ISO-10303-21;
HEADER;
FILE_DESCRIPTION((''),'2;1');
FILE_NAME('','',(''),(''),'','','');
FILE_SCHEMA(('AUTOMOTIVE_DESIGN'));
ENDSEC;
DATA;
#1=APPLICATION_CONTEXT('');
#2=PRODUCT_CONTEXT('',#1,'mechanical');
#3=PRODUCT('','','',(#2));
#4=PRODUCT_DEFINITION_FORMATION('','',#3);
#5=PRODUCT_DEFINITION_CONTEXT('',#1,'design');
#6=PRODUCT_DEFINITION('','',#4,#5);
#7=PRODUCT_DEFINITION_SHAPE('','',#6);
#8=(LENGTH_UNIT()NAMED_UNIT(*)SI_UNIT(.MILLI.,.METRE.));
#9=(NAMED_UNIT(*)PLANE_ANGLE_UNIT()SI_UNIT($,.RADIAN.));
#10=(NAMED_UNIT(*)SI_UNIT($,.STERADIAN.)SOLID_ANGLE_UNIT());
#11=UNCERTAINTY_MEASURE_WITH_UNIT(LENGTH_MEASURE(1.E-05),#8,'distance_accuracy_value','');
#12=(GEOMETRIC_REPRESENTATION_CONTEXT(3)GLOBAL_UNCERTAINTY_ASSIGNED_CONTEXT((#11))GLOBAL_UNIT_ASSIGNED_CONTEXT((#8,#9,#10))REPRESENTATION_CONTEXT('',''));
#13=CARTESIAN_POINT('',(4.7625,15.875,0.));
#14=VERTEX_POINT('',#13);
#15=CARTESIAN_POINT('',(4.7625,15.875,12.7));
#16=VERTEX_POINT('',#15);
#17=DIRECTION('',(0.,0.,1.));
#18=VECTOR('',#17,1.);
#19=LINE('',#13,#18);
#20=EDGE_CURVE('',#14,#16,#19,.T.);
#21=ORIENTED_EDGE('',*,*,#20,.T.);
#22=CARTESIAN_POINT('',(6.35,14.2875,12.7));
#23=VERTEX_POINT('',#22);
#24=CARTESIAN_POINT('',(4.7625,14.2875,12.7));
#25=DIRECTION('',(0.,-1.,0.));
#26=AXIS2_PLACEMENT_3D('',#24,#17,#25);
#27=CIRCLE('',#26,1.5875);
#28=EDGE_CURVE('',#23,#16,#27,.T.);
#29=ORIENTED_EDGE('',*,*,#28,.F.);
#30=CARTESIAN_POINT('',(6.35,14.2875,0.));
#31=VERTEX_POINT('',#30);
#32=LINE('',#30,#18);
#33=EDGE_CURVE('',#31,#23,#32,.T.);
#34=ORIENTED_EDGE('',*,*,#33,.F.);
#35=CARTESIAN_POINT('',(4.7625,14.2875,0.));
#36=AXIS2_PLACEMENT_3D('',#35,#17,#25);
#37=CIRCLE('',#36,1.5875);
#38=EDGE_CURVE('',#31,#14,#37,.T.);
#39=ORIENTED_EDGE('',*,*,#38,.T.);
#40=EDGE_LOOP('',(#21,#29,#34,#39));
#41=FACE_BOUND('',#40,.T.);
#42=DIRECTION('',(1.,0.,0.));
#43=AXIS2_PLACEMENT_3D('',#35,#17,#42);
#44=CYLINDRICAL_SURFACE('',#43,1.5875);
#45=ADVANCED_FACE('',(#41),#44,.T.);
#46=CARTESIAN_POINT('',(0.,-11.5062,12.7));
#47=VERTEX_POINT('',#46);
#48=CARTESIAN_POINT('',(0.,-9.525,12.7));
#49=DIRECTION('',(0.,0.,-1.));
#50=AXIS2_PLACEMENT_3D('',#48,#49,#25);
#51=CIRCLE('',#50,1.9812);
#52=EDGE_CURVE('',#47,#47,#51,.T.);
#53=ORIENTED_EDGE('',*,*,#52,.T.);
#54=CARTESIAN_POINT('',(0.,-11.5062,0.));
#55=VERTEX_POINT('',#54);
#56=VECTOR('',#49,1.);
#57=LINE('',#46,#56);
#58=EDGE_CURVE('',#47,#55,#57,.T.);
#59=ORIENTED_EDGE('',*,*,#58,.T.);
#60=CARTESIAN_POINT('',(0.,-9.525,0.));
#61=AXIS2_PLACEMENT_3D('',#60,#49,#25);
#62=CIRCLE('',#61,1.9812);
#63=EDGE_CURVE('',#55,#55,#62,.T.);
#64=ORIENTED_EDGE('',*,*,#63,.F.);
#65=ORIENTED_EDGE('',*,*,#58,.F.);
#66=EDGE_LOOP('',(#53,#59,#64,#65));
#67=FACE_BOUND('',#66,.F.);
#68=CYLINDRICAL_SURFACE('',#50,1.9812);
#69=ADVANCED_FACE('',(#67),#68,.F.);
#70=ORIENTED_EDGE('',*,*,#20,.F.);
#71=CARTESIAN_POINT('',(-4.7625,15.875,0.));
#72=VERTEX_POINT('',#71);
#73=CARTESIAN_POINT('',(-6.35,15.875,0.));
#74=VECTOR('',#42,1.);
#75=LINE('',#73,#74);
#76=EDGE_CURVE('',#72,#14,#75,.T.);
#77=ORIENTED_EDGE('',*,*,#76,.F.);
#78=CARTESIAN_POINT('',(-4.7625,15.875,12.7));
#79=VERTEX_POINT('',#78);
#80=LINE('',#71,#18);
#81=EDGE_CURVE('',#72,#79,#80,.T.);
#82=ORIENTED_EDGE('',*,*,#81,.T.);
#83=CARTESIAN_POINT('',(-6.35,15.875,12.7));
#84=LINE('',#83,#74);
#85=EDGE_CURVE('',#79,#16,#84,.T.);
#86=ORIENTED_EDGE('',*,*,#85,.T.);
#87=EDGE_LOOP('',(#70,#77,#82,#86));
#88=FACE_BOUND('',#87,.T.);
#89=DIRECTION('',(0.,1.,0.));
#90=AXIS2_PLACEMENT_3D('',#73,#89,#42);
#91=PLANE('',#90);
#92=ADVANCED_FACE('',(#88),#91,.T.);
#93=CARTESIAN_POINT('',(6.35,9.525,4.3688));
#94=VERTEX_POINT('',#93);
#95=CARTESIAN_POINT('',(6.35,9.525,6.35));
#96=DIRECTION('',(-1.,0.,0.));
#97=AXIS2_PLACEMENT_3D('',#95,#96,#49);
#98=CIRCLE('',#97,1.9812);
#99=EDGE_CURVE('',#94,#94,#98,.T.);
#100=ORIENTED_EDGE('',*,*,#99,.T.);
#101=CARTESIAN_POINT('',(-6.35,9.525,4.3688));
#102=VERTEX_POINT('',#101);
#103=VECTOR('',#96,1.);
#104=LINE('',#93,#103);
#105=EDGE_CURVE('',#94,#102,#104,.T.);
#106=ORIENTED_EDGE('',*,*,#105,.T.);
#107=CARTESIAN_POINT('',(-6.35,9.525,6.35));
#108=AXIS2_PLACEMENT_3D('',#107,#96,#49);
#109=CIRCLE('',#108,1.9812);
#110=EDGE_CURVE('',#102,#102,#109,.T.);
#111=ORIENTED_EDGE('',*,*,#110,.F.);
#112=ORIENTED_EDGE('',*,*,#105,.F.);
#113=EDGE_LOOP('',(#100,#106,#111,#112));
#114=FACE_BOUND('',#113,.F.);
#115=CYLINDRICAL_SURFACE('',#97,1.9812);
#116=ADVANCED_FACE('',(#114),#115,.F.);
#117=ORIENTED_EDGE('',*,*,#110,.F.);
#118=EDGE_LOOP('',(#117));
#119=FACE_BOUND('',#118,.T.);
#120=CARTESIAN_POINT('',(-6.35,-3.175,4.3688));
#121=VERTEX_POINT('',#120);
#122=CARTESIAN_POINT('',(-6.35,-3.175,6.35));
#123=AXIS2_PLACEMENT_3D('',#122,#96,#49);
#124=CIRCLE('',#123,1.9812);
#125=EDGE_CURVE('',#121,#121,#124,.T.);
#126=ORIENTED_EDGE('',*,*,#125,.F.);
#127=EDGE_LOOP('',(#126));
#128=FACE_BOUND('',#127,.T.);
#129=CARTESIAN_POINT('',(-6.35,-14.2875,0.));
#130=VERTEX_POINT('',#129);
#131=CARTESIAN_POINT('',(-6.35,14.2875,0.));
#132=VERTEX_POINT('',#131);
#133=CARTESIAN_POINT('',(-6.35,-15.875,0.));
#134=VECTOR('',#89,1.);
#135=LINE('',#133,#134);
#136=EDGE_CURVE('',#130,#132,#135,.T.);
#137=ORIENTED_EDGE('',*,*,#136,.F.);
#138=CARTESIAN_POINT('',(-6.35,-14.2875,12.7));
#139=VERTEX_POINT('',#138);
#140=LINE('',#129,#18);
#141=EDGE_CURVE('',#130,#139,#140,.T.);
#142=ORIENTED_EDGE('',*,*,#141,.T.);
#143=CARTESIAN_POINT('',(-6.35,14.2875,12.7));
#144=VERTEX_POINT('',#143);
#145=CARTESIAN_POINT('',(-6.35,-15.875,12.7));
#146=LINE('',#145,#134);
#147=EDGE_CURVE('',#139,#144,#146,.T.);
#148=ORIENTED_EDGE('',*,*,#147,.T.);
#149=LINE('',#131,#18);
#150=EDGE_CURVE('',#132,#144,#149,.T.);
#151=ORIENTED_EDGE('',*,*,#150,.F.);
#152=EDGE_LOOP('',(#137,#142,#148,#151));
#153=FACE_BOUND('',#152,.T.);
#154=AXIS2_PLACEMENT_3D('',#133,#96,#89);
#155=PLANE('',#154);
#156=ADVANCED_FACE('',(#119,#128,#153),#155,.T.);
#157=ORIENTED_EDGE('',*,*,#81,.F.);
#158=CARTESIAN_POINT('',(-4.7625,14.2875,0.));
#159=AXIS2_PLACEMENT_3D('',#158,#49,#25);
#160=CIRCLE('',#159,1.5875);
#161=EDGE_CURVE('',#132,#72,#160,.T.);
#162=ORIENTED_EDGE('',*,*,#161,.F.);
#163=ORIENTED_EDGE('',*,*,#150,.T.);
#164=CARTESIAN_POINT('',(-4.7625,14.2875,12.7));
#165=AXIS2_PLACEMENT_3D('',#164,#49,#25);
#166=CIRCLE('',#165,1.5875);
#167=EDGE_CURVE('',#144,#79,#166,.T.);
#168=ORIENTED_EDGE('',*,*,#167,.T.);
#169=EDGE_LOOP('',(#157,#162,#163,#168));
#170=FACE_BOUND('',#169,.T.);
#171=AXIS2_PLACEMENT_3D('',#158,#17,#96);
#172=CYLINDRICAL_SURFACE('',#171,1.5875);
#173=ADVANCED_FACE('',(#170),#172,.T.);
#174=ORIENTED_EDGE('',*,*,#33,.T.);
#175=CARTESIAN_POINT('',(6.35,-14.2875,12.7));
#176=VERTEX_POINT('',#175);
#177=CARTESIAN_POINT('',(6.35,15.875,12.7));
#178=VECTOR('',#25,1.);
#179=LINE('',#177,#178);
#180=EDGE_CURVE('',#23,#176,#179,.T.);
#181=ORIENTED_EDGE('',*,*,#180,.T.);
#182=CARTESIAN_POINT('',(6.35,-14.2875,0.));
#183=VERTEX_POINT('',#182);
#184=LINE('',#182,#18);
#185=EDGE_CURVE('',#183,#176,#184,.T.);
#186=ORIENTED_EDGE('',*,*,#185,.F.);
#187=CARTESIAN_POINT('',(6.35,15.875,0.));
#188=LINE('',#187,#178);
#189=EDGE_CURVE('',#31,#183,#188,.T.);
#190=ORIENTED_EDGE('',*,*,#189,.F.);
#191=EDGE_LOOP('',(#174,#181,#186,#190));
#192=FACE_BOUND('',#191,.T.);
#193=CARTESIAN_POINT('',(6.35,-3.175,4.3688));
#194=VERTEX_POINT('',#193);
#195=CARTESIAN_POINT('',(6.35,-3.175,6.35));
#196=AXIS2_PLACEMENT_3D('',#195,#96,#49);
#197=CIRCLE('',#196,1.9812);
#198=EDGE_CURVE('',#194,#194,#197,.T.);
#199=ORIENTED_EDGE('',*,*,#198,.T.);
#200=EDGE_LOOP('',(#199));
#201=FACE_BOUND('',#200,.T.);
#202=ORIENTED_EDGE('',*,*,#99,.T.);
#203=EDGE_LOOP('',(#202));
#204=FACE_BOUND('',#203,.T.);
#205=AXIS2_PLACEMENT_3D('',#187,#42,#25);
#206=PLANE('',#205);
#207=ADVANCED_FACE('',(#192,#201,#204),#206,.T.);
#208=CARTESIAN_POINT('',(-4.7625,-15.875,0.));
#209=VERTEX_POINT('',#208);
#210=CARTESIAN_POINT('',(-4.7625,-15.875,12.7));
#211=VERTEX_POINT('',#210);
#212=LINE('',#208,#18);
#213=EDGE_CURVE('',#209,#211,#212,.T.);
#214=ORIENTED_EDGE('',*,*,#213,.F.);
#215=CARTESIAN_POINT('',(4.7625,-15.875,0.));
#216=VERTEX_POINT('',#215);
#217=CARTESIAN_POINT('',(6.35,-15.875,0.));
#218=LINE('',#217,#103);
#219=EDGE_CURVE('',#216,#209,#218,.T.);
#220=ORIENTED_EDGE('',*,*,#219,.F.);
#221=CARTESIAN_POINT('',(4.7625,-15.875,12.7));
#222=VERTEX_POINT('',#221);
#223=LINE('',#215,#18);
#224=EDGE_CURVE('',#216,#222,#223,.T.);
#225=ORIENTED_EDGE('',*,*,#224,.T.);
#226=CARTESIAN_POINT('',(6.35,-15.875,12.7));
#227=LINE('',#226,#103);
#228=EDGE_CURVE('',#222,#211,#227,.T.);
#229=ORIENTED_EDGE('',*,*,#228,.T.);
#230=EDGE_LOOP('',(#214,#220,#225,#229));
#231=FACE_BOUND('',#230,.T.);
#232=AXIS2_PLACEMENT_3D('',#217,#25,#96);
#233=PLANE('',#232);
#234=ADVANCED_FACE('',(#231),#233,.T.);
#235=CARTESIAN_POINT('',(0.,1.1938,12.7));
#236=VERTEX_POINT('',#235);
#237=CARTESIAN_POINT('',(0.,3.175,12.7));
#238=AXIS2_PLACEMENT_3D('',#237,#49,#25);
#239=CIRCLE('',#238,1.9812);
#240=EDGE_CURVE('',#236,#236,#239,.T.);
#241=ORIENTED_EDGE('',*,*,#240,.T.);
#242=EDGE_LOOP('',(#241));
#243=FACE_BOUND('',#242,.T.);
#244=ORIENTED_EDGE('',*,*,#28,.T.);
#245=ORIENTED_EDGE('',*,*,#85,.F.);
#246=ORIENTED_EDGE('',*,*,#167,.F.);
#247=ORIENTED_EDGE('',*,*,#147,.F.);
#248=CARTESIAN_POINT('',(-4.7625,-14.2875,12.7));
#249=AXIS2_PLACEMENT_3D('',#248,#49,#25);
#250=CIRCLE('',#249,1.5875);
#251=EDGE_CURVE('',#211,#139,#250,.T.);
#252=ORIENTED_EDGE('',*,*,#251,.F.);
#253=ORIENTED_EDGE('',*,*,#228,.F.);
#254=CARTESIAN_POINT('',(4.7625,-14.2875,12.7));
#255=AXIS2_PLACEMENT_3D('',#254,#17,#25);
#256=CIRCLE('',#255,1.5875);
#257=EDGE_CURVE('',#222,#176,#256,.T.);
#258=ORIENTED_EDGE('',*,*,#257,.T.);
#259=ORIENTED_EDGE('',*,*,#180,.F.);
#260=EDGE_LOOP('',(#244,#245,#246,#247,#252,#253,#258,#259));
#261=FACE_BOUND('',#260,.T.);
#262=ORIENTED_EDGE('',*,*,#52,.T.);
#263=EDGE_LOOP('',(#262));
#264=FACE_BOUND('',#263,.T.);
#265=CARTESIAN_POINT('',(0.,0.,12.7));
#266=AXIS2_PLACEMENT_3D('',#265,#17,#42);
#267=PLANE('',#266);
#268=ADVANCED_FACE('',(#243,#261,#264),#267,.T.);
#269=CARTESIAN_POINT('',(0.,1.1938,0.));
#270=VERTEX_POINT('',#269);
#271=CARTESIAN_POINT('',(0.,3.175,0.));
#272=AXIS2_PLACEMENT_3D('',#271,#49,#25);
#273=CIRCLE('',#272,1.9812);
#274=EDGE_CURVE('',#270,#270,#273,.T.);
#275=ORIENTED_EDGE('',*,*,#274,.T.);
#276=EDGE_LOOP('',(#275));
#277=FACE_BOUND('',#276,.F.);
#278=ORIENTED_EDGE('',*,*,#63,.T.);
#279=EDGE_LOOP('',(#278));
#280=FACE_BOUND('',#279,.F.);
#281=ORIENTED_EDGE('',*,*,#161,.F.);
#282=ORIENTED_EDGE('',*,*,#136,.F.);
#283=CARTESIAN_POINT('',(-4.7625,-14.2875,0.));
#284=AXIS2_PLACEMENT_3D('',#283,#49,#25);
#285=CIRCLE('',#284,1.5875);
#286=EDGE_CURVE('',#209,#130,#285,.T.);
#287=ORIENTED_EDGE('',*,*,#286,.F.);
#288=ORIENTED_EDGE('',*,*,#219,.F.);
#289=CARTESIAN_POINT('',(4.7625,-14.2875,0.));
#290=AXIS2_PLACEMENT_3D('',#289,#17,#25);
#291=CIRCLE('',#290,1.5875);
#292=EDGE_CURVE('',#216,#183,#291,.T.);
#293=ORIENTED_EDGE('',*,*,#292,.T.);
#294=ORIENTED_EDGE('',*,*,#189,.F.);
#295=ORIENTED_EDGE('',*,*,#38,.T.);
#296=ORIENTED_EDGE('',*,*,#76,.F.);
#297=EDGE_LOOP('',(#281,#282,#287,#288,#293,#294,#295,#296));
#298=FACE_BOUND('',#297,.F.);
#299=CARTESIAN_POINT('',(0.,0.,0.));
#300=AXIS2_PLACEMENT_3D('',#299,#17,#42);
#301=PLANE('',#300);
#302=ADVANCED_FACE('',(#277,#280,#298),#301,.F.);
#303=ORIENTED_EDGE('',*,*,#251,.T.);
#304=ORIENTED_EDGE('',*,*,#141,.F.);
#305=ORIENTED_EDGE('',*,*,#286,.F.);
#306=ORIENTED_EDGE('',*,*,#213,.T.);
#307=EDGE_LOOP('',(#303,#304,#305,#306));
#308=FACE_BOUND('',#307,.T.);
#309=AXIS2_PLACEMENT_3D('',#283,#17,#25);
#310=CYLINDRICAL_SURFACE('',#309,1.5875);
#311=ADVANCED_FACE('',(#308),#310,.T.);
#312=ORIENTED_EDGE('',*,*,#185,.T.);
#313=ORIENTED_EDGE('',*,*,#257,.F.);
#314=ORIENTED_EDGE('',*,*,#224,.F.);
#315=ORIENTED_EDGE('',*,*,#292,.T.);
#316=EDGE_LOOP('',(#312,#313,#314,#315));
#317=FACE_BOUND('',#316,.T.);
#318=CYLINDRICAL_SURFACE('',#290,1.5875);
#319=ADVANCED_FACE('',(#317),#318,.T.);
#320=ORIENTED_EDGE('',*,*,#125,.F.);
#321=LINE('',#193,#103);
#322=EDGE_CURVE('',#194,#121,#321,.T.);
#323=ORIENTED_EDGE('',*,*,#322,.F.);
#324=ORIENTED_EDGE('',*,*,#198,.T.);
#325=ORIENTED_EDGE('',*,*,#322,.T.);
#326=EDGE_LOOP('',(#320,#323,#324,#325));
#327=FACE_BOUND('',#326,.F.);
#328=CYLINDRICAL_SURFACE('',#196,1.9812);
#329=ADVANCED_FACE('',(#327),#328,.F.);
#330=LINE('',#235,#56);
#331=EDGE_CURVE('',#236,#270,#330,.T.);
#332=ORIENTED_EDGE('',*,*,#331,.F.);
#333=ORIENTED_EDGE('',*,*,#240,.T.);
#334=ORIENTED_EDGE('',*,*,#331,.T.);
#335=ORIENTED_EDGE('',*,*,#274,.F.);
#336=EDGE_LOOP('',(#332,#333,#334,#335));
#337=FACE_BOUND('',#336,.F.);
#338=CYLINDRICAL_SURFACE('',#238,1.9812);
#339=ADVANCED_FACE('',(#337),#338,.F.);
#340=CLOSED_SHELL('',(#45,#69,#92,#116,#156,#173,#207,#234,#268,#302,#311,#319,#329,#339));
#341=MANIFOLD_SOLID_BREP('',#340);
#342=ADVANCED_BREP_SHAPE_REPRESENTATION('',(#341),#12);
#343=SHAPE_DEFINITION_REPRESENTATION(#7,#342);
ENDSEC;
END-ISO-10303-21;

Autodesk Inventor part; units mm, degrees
ref_plane "YZ Plane" through (0, 0, 0) normal (1, 0, 0) x (0, 1, 0)
ref_plane "XZ Plane" through (0, 0, 0) normal (0, 1, 0) x (-1, 0, 0)
ref_plane "XY Plane" through (0, 0, 0) normal (0, 0, 1) x (1, 0, 0)
sketch "Sketch1" plane through (0, 0, 0) normal (0, 0, 1) x (1, 0, 0)
  line L0 (6.35, -15.875) -> (-6.35, -15.875)
  line L1 (-6.35, -15.875) -> (-6.35, 15.875)
  line L2 (-6.35, 15.875) -> (6.35, 15.875)
  line L3 (6.35, 15.875) -> (6.35, -15.875)
  line L4 (6.35, -15.875) -> (-6.35, 15.875) construction
  line L5 (-6.35, -15.875) -> (6.35, 15.875) construction
  point P0 (0, 0)
  dimension "d0" = 12.7
  dimension "d1" = 31.75
extrude "Plate1" add sketch "Sketch1" along normal blind 12.7
sketch "Sketch2" plane through (0, 0, 12.7) normal (0, 0, 1) x (1, 0, 0)
  line L0 (6.35, -15.875) -> (-6.35, -15.875) projected
  point P0 (0, 0)
  point P1 (0, -9.525)
  point P2 (0, 3.175)
  dimension "d3" = 12.7
  dimension "d4" = 6.35
hole "Hole1" at (0, -9.525, 12.7) at (0, 3.175, 12.7) direction (0, 0, -1) diameter 3.9624 depth 12.7 tip angle 118 thread size "10-32 UNF" class "2B" standard "ANSI Unified Screw Threads"
sketch "Sketch3" plane through (6.35, -15.875, 0) normal (1, 0, 0) x (0, 0, -1)
  line L0 (0, 31.75) -> (-12.7, 31.75) projected
  line L1 (0, 0) -> (0, 31.75) projected
  point P0 (0, 15.875)
  point P1 (-6.35, 12.7)
  point P2 (-6.35, 25.4)
  dimension "d12" = 12.7
  dimension "d13" = 6.35
  dimension "d14" = 6.35
hole "Hole2" at (6.35, -3.175, 6.35) at (6.35, 9.525, 6.35) direction (-1, 0, 0) diameter 3.9624 depth 12.7 tip angle 118 thread size "10-32 UNF" class "2B" standard "ANSI Unified Screw Threads"
fillet "Corner Round1" radius 1.5875 4 edges at (-6.35, -15.875, 6.35) (6.35, -15.875, 6.35) (-6.35, 15.875, 6.35) (6.35, 15.875, 6.35)
equation "\"d10\" = Thickness"
equation "\"d20\" = Thickness"
equation "\"d2\" = Thickness"
equation "\"BendRadius\" = Thickness"
equation "\"BendReliefWidth\" = Thickness"
equation "\"BendReliefDepth\" = 0.5 * Thickness"
equation "\"CornerReliefSize\" = 4 * Thickness"
equation "\"MinimumRemnant\" = 2 * Thickness"
equation "\"TransitionRadius\" = BendRadius"
equation "\"JacobiRadiusSize\" = BendRadius"
equation "\"GapSize\" = Thickness"
equation "\"Thickness\" = 12.7"
properties part number "PLATE,NUT-BLOCK,2-LONG" material "Aluminum 6061"
